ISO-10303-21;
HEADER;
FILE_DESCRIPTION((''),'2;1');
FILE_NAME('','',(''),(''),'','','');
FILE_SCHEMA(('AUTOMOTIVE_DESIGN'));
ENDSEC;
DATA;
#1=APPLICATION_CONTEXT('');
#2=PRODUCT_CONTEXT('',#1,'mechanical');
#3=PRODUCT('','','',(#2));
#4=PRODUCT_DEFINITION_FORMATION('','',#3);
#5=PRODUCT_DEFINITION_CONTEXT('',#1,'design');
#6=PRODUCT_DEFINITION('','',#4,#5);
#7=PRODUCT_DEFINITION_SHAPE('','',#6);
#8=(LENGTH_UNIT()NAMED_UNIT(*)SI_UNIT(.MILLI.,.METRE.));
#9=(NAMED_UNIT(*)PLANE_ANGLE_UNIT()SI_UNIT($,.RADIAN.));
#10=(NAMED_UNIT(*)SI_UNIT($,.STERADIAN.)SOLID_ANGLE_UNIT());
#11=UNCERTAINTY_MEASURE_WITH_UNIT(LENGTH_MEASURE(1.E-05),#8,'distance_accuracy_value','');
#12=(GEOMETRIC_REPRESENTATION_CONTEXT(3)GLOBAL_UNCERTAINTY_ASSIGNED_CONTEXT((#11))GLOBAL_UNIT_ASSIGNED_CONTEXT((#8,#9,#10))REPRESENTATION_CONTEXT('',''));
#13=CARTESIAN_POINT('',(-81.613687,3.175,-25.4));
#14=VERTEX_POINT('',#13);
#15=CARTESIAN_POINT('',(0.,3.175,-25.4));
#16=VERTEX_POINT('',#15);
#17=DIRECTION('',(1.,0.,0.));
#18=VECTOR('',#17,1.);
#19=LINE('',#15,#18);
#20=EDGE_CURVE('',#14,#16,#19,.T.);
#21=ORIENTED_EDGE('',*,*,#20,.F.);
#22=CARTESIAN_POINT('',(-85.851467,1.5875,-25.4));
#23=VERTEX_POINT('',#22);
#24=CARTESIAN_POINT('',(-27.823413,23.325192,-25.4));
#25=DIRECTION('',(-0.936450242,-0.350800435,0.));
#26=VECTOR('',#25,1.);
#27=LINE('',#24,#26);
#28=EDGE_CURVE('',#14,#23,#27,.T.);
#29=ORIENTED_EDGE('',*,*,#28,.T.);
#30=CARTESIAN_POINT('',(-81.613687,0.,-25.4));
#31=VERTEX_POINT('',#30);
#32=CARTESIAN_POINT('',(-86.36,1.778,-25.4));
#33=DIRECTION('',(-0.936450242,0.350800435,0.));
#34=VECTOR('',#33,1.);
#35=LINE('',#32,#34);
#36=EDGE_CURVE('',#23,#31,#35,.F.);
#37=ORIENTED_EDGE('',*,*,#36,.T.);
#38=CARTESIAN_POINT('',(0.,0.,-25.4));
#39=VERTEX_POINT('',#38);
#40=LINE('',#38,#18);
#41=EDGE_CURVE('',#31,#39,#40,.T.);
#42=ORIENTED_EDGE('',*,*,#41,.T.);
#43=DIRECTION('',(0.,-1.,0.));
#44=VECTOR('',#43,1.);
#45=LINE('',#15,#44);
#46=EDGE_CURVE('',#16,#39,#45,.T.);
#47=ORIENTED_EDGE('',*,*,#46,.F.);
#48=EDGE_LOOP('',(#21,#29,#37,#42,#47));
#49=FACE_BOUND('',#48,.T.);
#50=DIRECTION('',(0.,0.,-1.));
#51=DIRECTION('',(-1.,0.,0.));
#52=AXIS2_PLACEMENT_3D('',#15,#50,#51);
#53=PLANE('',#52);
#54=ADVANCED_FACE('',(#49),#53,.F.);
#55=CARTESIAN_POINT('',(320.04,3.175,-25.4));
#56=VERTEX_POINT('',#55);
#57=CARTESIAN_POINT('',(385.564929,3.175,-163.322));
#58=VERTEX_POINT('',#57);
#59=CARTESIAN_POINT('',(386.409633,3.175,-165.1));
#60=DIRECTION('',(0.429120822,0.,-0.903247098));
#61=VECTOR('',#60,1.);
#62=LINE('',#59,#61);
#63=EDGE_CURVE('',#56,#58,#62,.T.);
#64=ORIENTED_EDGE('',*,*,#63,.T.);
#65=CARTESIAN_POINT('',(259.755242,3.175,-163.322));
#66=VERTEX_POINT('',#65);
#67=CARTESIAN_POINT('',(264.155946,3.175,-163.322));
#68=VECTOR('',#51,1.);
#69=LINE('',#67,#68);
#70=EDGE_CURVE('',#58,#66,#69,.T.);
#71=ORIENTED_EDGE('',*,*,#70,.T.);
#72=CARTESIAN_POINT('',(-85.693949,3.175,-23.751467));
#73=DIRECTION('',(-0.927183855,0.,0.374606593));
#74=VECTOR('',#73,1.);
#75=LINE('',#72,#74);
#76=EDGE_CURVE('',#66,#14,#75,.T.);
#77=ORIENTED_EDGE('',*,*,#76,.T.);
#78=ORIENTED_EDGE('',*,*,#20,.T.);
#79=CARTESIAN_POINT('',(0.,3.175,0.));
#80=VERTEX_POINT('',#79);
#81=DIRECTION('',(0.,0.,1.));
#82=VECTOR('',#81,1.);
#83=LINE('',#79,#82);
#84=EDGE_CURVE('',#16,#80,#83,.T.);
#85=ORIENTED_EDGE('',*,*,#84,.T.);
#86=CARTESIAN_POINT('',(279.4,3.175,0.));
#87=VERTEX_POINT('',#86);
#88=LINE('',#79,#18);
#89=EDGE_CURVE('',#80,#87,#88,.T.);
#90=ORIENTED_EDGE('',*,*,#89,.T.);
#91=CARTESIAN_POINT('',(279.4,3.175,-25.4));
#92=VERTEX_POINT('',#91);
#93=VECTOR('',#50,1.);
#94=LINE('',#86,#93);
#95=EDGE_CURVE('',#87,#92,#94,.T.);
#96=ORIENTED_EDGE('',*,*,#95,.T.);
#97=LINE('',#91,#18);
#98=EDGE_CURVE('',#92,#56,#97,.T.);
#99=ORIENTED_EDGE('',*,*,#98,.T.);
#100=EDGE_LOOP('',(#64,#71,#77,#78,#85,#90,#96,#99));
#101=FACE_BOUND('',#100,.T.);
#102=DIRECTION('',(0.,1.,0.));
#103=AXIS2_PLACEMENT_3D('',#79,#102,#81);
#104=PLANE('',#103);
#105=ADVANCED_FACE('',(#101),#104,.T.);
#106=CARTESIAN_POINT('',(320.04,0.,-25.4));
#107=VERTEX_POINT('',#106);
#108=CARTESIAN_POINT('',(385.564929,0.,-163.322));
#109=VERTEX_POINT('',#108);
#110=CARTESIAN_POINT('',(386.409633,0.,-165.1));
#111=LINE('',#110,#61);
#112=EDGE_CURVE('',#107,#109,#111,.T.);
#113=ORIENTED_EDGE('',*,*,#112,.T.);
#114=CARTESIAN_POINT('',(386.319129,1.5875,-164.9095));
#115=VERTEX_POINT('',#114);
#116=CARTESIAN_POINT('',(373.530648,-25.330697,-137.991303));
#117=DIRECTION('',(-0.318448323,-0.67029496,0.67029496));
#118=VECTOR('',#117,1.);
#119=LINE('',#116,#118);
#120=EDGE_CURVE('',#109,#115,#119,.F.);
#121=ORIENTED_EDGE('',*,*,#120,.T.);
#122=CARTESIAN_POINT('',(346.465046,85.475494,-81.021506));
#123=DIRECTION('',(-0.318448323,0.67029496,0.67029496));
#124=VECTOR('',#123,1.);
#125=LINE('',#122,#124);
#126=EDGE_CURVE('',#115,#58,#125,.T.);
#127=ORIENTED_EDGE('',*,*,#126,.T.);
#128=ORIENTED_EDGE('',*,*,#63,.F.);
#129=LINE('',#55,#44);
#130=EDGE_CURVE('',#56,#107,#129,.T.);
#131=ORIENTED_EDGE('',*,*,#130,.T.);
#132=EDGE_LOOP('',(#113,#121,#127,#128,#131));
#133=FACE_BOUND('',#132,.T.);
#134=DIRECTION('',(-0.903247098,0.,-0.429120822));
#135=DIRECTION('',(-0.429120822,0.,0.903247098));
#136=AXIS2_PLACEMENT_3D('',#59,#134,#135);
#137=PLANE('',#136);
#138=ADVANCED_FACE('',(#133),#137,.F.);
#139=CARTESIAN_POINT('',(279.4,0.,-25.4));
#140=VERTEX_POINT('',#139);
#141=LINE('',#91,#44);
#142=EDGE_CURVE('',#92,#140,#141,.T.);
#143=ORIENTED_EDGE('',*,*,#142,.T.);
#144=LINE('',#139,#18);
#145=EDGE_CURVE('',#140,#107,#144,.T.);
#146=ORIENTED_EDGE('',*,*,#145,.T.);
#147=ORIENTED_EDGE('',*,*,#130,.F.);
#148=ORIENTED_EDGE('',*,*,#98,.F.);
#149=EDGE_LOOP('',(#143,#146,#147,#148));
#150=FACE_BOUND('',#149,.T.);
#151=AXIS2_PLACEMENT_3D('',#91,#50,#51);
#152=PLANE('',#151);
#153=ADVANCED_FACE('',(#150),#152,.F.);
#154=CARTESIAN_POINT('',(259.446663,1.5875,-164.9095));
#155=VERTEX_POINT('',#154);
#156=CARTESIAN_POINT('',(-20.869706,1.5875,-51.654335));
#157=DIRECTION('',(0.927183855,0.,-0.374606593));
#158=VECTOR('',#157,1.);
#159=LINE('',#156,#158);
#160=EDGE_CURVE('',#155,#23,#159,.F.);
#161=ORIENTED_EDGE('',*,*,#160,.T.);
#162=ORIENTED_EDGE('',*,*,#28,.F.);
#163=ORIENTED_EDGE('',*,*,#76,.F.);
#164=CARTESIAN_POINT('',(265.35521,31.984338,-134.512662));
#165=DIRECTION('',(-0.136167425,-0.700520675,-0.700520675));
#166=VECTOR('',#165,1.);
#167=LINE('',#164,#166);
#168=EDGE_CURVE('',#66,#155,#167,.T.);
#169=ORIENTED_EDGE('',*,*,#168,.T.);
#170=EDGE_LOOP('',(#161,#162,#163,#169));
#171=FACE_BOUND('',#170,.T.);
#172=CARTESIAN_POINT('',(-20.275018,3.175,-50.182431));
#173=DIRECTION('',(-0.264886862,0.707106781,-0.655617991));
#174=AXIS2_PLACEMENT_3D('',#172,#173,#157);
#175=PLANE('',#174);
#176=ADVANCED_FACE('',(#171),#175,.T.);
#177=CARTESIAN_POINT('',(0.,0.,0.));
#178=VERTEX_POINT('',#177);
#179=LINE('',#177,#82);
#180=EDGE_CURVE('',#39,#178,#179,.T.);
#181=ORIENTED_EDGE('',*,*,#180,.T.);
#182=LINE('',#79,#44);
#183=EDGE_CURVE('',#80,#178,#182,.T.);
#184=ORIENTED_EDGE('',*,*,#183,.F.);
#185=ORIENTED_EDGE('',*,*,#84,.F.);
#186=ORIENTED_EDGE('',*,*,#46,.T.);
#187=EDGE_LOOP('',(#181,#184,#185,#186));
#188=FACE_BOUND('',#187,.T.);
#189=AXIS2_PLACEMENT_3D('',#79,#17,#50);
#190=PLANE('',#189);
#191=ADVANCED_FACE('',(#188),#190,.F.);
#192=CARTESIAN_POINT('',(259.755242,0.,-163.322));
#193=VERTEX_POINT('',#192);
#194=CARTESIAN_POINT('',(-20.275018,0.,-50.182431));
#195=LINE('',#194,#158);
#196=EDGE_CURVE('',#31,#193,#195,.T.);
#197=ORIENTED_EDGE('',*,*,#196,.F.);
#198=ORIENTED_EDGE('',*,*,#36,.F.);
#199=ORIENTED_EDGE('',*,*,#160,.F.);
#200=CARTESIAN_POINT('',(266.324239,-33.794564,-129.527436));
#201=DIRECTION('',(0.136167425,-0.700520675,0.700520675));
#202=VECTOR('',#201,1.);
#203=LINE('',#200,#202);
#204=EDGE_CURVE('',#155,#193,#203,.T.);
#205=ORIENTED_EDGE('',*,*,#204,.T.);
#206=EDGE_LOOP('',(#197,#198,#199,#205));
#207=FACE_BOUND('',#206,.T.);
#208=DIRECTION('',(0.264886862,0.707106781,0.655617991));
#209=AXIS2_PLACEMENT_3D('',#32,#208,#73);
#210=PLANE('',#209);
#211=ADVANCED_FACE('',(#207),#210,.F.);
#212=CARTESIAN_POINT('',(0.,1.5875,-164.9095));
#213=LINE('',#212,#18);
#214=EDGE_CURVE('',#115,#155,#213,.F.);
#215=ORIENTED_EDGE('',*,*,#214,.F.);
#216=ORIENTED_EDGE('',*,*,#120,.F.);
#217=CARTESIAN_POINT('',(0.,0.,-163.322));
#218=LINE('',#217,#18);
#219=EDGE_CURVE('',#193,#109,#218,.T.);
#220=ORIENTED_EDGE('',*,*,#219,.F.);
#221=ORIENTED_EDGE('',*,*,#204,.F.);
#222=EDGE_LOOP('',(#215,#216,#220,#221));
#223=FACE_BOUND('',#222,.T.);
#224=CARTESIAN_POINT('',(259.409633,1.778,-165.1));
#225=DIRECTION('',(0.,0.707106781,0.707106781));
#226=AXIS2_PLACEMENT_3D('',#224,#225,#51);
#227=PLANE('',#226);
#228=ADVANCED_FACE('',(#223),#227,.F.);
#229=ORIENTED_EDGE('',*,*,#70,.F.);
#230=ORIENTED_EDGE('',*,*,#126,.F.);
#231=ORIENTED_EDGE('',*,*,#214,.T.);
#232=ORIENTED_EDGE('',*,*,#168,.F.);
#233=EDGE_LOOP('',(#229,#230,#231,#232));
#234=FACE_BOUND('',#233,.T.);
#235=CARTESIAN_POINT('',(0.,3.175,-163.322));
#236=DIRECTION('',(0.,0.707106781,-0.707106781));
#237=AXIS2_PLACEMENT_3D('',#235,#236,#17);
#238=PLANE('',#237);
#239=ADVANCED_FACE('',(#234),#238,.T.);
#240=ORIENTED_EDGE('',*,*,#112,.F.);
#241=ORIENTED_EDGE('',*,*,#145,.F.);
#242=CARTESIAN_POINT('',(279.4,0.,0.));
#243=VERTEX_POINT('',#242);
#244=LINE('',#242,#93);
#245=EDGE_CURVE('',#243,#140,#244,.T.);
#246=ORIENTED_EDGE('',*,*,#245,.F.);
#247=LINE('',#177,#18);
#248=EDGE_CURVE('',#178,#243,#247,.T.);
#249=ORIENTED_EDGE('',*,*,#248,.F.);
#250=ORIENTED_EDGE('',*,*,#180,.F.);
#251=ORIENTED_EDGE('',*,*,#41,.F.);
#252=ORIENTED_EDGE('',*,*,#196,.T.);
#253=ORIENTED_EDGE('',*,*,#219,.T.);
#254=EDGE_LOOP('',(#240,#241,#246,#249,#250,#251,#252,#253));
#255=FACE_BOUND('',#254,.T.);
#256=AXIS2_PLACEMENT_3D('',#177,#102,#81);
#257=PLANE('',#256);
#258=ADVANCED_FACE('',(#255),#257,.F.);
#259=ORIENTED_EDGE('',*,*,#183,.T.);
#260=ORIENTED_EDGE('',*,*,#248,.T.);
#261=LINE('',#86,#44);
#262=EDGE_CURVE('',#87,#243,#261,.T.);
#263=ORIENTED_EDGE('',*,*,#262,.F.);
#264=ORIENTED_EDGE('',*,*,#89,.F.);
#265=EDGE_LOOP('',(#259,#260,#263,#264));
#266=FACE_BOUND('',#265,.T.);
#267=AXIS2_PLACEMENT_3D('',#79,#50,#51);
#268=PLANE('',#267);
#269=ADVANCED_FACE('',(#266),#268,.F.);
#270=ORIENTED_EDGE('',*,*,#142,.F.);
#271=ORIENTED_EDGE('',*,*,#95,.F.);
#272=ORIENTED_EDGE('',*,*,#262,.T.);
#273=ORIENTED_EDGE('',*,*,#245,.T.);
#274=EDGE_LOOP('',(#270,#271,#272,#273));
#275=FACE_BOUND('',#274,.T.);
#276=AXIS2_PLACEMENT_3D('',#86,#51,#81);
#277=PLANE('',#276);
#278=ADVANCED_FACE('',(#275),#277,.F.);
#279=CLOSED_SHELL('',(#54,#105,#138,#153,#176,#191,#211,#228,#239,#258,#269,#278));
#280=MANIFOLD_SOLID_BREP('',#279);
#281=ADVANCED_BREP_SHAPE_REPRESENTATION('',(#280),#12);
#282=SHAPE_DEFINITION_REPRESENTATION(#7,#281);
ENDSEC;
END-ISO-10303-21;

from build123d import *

# Parameters (mm, degrees)
BOSS_EXTRUDE1_DEPTH = 3.175
CHAMFER1_SIZE       = 1.778


with BuildPart() as part:
    # Sketch1 → Boss-Extrude1 (new body)
    with BuildSketch(Plane(origin=(0, 0, 0), x_dir=(1, 0, 0), z_dir=(0, 1, 0))):
        Polygon((279.4, 25.4), (320.04, 25.4), (386.409633422, 165.1), (259.409633422, 165.1), (-86.36, 25.4), (0, 25.4), (0, 0), (279.4, 0), align=None)
    extrude(amount=BOSS_EXTRUDE1_DEPTH)

    # Chamfer1
    # the kernel refuses this chamfer: 1.778 mm, written as the material it takes off along each edge
    with BuildSketch(Plane(origin=(263.649137419, 3.175, -166.812870799), x_dir=(-0.01030013667007983, -0.9996219169112964, -0.02549373286050588), z_dir=(-0.9271838545667884, 0, 0.3746065934159097))) as chamfer1_piece_1:
        Polygon((CHAMFER1_SIZE * 0.999621916911, CHAMFER1_SIZE * 0.0274958766106), (-CHAMFER1_SIZE * 0.0274958766106, CHAMFER1_SIZE * 0.999621916911), (0, 0), align=None)
    extrude(amount=382.069467314, mode=Mode.SUBTRACT)
    with BuildSketch(Plane(origin=(263.649137419, 0, -166.812870799), x_dir=(-0.01030013667007983, 0.9996219169112964, -0.02549373286050588), z_dir=(-0.9271838545667884, 0, 0.3746065934159097))) as chamfer1_piece_2:
        Polygon((CHAMFER1_SIZE * 0.999621916911, -CHAMFER1_SIZE * 0.0274958766106), (-CHAMFER1_SIZE * 0.0274958766106, -CHAMFER1_SIZE * 0.999621916911), (0, 0), align=None)
    extrude(amount=382.069467314, mode=Mode.SUBTRACT)

    # Chamfer2
    # the kernel refuses this chamfer: 1.778 mm, written as the material it takes off along each edge
    with BuildSketch(Plane(origin=(397.383519069, 3.175, -165.1), x_dir=(0, 0.027495876610586497, 0.9996219169112968), z_dir=(-1, 0, 0))) as chamfer2_piece_1:
        with BuildLine():
            Line((1.828980941, 0), (-0.100540841, -1.826215437))
            Line((-0.100540841, -1.826215437), (-0.136087397, -1.825237684))
            ThreePointArc((-0.136087397, -1.825237684), (-0.060681766, -0.912821341), (-0.035546555, 0.000977753))
            Line((-0.035546555, 0.000977753), (0.000977753, 0.035546555))
            ThreePointArc((0.000977753, 0.035546555), (0.914776848, 0.010411345), (1.829958694, 0.035546555))
            Line((1.829958694, 0.035546555), (1.828980941, 0))
        make_face()
    extrude(amount=144.201458677, mode=Mode.SUBTRACT)
    with BuildSketch(Plane(origin=(397.383519069, 0, -165.1), x_dir=(0, -0.02749587661058638, 0.9996219169112968), z_dir=(-1, 0, 0))) as chamfer2_piece_2:
        with BuildLine():
            Line((1.828980941, 0), (-0.100540841, 1.826215437))
            Line((-0.100540841, 1.826215437), (-0.136087397, 1.825237684))
            ThreePointArc((-0.136087397, 1.825237684), (-0.060681766, 0.912821341), (-0.035546555, -0.000977753))
            Line((-0.035546555, -0.000977753), (0.000977753, -0.035546555))
            ThreePointArc((0.000977753, -0.035546555), (0.914776848, -0.010411345), (1.829958694, -0.035546555))
            Line((1.829958694, -0.035546555), (1.828980941, 0))
        make_face()
    extrude(amount=144.201458677, mode=Mode.SUBTRACT)


solid = part.part
